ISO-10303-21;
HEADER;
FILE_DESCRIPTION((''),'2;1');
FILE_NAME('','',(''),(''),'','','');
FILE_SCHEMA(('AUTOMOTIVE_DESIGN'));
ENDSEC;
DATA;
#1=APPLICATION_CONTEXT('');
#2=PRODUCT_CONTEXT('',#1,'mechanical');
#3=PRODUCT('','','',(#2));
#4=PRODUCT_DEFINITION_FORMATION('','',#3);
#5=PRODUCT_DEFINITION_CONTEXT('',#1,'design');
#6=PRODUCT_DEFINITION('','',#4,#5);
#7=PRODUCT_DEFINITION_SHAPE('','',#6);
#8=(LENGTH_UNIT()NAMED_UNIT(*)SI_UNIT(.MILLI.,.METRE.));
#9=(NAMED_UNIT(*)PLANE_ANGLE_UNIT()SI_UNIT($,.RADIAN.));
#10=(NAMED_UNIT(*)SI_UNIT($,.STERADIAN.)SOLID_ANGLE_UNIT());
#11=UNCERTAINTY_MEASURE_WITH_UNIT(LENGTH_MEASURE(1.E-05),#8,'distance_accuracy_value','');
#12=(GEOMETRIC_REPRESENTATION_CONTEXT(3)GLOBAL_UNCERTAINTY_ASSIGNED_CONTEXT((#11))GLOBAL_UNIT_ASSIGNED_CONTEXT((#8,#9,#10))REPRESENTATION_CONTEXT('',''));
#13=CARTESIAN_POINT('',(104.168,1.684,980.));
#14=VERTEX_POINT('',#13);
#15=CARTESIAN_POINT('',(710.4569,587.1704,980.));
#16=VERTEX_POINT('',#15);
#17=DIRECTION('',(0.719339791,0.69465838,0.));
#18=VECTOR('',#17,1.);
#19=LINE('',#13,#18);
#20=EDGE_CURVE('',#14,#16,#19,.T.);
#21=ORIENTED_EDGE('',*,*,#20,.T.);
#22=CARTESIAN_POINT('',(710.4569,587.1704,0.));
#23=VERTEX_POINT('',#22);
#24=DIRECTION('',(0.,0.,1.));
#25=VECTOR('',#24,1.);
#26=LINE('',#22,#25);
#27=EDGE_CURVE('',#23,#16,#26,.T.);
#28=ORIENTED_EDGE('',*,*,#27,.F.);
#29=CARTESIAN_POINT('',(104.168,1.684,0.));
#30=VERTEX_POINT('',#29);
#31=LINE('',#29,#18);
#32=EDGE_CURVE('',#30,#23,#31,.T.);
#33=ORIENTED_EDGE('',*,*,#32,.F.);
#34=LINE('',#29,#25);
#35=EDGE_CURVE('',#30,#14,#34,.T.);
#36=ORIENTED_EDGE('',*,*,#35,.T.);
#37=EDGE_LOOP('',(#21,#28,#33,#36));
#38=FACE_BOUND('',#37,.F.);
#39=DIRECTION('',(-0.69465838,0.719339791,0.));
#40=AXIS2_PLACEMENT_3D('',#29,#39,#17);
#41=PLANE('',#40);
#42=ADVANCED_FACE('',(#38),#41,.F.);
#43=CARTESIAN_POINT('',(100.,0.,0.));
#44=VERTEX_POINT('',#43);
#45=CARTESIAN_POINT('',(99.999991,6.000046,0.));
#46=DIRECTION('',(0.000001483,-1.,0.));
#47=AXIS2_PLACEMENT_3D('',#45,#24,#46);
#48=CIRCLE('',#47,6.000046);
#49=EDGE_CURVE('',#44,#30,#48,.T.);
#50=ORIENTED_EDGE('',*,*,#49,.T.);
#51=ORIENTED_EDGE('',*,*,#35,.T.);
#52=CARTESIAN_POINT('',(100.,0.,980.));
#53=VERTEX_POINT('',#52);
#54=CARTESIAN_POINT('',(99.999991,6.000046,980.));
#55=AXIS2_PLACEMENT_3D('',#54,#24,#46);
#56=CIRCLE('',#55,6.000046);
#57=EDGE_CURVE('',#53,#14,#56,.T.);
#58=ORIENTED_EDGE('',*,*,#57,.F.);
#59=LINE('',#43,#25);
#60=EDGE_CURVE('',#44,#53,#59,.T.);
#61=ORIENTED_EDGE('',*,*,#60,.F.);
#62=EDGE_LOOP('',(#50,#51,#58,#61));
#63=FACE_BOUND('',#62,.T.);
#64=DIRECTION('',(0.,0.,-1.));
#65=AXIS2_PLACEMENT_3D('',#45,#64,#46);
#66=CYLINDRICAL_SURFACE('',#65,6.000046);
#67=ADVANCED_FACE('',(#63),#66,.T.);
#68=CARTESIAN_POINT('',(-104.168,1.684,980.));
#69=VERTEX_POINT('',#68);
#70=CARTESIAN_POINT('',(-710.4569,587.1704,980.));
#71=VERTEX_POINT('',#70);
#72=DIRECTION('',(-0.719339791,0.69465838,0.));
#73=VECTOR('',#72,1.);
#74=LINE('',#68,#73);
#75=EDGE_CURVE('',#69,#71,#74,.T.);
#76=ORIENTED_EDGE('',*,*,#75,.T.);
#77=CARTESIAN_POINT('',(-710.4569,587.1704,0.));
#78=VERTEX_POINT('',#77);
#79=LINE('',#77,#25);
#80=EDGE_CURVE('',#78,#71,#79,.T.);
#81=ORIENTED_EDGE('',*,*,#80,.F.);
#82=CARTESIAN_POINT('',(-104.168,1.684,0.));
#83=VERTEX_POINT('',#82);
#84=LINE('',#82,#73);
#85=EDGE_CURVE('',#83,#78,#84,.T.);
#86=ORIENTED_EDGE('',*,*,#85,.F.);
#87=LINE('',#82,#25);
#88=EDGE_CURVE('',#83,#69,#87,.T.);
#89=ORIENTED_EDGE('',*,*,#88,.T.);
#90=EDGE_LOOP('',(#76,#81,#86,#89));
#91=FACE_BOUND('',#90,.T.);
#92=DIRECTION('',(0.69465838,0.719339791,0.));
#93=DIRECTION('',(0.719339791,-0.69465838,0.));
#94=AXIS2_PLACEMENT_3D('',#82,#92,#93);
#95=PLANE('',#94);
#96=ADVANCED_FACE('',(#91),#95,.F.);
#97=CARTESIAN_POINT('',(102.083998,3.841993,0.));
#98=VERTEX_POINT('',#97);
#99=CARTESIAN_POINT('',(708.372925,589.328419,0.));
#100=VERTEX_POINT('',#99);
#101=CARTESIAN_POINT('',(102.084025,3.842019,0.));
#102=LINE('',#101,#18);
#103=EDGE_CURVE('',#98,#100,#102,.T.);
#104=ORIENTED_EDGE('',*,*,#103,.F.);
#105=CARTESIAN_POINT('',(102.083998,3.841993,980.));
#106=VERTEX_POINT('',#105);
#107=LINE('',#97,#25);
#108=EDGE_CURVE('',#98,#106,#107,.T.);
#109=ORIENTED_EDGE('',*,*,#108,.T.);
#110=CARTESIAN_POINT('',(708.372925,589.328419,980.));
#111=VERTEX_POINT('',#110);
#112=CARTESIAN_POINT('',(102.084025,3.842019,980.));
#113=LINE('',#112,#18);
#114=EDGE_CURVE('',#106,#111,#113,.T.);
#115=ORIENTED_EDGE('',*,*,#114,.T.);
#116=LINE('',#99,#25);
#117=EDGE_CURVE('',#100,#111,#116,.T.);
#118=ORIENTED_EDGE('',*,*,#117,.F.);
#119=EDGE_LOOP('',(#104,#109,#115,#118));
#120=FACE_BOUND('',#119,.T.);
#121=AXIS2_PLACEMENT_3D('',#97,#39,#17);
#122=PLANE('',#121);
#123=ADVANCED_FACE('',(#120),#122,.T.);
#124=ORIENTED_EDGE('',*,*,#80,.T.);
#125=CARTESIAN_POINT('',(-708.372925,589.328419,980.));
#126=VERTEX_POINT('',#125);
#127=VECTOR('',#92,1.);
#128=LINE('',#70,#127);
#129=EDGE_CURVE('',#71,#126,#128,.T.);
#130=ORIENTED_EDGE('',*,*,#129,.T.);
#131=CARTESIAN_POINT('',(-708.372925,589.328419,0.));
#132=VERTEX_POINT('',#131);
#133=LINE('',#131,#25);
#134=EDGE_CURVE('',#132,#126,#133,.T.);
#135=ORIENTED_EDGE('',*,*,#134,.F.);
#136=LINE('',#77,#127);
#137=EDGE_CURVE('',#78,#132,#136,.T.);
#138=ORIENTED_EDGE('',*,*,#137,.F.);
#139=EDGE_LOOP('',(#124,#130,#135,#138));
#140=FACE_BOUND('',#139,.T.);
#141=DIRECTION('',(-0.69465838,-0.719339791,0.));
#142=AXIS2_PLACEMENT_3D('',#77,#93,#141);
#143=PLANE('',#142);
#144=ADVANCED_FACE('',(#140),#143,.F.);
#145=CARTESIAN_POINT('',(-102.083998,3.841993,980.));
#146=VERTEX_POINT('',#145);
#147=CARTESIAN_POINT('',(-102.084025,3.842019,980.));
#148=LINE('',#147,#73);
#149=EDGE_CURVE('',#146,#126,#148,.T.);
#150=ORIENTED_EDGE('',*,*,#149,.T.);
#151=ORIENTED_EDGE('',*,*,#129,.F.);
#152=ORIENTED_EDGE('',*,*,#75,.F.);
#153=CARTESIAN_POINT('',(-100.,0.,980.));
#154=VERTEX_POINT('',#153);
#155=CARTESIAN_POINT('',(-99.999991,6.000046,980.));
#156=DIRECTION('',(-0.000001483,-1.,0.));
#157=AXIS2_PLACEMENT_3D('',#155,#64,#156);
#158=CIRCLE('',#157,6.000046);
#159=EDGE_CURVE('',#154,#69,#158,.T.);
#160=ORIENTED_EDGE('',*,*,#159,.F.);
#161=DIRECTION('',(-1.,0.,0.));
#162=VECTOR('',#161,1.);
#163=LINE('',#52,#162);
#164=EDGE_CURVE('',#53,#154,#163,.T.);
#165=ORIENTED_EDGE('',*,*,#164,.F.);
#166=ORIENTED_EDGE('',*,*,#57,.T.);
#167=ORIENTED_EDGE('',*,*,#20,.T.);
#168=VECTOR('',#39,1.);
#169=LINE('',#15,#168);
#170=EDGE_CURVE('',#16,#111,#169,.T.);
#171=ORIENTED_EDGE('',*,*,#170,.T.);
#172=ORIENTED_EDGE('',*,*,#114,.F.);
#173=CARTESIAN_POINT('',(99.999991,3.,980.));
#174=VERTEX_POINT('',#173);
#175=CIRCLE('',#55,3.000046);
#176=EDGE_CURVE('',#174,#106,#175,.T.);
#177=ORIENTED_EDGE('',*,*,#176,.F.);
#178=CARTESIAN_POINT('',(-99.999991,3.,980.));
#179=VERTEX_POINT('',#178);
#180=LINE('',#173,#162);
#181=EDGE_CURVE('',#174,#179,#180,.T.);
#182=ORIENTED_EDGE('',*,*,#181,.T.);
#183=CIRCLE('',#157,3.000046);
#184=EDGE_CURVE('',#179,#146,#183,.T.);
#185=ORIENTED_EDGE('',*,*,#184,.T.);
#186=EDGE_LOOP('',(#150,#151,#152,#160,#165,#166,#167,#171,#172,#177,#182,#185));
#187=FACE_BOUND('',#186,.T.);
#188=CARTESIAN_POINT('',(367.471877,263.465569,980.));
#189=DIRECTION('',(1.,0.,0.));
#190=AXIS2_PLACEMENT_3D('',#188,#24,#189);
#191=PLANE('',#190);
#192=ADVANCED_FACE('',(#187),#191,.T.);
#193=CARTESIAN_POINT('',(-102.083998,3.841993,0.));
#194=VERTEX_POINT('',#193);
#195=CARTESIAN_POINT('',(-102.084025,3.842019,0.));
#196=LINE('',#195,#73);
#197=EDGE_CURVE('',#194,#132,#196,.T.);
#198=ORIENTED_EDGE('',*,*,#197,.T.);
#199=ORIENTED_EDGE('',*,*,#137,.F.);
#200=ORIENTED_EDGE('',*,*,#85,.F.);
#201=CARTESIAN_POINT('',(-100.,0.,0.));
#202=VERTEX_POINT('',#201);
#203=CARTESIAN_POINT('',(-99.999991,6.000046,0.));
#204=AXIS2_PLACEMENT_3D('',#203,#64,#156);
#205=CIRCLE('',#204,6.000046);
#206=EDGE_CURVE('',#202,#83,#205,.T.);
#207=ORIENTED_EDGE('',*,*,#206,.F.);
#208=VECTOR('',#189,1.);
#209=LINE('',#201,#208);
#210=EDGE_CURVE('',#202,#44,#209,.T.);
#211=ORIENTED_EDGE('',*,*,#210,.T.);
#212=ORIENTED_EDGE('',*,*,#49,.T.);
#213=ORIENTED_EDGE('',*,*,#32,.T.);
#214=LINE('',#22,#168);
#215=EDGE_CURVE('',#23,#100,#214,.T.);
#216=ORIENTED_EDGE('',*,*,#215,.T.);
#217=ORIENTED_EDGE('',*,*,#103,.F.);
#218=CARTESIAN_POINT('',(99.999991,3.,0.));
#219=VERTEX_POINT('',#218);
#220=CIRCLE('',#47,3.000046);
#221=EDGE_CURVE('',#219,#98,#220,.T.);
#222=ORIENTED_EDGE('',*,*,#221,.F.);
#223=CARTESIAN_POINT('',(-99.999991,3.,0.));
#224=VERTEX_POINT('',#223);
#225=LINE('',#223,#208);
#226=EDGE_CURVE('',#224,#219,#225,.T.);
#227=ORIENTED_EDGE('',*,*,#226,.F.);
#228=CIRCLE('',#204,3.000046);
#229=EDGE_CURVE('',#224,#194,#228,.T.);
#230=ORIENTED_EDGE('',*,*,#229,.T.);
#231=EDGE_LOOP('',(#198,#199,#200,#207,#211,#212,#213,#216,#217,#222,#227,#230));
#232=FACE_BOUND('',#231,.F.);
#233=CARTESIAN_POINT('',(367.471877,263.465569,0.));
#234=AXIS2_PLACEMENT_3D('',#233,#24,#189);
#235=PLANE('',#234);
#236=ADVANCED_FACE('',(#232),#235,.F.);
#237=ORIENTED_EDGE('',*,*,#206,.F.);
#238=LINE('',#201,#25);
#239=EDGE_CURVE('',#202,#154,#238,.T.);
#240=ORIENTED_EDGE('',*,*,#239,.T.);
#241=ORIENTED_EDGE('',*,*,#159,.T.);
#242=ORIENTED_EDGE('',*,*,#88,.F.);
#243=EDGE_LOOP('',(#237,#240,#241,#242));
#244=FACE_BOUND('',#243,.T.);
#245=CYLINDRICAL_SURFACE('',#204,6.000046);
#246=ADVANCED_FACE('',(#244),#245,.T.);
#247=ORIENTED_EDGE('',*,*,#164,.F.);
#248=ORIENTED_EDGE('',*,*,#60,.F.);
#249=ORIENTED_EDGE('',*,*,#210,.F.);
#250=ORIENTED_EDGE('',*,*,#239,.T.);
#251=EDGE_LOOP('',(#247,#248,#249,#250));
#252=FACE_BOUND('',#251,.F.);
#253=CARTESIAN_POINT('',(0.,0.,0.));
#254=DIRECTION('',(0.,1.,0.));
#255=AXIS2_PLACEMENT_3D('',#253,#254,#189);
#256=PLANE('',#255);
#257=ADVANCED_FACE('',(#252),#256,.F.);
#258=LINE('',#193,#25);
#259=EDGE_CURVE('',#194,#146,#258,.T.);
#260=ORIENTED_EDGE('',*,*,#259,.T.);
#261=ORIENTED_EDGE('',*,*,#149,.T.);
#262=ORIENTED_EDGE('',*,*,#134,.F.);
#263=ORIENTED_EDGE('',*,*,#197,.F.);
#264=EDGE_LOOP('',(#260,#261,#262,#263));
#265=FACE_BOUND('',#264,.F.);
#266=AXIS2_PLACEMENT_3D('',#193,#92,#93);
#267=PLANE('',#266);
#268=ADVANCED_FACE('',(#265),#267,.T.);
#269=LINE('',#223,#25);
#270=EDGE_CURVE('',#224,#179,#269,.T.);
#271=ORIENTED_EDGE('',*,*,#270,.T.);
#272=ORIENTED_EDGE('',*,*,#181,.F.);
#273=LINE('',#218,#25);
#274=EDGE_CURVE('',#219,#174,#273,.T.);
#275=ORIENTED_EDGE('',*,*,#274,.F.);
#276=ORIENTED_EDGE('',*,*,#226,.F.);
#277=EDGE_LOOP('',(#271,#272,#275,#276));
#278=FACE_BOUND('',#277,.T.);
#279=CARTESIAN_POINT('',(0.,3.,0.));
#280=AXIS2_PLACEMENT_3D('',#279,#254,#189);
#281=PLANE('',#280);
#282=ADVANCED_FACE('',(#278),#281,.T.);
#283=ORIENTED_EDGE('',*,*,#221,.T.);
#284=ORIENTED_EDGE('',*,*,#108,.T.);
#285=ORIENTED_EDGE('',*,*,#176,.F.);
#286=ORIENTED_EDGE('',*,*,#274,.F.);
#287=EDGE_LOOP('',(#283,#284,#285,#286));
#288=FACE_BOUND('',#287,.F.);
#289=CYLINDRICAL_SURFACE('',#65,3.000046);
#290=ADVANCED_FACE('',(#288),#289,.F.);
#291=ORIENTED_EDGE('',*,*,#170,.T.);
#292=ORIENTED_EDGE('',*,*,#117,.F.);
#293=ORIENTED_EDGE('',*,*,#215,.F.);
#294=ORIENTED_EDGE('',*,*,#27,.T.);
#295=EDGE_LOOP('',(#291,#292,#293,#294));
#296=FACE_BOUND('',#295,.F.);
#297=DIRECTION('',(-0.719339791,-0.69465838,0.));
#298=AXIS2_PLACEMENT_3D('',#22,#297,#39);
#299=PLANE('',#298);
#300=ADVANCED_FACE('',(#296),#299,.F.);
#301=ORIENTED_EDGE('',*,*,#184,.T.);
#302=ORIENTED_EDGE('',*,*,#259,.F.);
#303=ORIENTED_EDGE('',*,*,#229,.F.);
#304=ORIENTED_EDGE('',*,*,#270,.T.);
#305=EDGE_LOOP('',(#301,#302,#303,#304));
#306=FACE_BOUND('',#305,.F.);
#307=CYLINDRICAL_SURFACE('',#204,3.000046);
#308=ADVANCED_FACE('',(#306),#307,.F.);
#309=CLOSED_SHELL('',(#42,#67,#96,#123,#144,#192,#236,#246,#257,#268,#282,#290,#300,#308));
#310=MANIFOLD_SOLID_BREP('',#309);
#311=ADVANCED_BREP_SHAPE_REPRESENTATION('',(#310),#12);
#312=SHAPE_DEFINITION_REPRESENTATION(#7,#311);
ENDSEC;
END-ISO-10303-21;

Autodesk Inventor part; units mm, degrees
ref_plane "YZ Plane" through (0, 0, 0) normal (1, 0, 0) x (0, 1, 0)
ref_plane "XZ Plane" through (0, 0, 0) normal (0, 1, 0) x (-1, 0, 0)
ref_plane "XY Plane" through (0, 0, 0) normal (0, 0, 1) x (1, 0, 0)
sketch "Sketch1" plane through (0, 0, 0) normal (0, 0, 1) x (1, 0, 0)
  line L0 (104.168, 1.684) -> (710.4569, 587.1704)
  arc A0 (100, 0) -> (104.168, 1.684) centre (100, 6) ccw
  line L1 (0, 0) -> (100, 0)
  dimension "d25" = 6
  dimension "d48" = 710.457
  dimension "d49" = 136
  dimension "d50" = 100
contour flange "Contour Flange1" sketch "Sketch1" thickness 3 bend radius 3 width 980 along (0, 0, 1) mid plane no both sides no wall seen from (50, 0, 0) lies toward (0, 1, 0) curves L1 A0 L0
bend "Bend1"
corner "Corner1"
mirror "Mirror1" about plane through (0, 0, 0) normal (1, 0, 0)
equation "\"d25\" = Thickness + BendRadius"
equation "\"d7\" = Thickness"
equation "\"d8\" = BendReliefWidth"
equation "\"d9\" = BendReliefDepth"
equation "\"d10\" = MinimumRemnant"
equation "\"d11\" = TransitionRadius"
equation "\"d13\" = BendRadius"
equation "\"d15\" = CornerReliefSize"
equation "\"d16\" = GapSize"
equation "\"d17\" = JacobiRadiusSize"
equation "\"BendRadius\" = Thickness"
equation "\"BendReliefWidth\" = Thickness"
equation "\"BendReliefDepth\" = 0.5 * Thickness"
equation "\"CornerReliefSize\" = 4 * Thickness"
equation "\"MinimumRemnant\" = 2 * Thickness"
equation "\"TransitionRadius\" = BendRadius"
equation "\"JacobiRadiusSize\" = BendRadius"
equation "\"GapSize\" = Thickness"
equation "\"d38\" = d40 + d44"
equation "\"d39\" = d40"
equation "\"d44\" = d40"
equation "\"Thickness\" = 3"
equation "\"d40\" = 3"
properties part number "MSC 041 sheet belly main" material "Stainless Steel"
